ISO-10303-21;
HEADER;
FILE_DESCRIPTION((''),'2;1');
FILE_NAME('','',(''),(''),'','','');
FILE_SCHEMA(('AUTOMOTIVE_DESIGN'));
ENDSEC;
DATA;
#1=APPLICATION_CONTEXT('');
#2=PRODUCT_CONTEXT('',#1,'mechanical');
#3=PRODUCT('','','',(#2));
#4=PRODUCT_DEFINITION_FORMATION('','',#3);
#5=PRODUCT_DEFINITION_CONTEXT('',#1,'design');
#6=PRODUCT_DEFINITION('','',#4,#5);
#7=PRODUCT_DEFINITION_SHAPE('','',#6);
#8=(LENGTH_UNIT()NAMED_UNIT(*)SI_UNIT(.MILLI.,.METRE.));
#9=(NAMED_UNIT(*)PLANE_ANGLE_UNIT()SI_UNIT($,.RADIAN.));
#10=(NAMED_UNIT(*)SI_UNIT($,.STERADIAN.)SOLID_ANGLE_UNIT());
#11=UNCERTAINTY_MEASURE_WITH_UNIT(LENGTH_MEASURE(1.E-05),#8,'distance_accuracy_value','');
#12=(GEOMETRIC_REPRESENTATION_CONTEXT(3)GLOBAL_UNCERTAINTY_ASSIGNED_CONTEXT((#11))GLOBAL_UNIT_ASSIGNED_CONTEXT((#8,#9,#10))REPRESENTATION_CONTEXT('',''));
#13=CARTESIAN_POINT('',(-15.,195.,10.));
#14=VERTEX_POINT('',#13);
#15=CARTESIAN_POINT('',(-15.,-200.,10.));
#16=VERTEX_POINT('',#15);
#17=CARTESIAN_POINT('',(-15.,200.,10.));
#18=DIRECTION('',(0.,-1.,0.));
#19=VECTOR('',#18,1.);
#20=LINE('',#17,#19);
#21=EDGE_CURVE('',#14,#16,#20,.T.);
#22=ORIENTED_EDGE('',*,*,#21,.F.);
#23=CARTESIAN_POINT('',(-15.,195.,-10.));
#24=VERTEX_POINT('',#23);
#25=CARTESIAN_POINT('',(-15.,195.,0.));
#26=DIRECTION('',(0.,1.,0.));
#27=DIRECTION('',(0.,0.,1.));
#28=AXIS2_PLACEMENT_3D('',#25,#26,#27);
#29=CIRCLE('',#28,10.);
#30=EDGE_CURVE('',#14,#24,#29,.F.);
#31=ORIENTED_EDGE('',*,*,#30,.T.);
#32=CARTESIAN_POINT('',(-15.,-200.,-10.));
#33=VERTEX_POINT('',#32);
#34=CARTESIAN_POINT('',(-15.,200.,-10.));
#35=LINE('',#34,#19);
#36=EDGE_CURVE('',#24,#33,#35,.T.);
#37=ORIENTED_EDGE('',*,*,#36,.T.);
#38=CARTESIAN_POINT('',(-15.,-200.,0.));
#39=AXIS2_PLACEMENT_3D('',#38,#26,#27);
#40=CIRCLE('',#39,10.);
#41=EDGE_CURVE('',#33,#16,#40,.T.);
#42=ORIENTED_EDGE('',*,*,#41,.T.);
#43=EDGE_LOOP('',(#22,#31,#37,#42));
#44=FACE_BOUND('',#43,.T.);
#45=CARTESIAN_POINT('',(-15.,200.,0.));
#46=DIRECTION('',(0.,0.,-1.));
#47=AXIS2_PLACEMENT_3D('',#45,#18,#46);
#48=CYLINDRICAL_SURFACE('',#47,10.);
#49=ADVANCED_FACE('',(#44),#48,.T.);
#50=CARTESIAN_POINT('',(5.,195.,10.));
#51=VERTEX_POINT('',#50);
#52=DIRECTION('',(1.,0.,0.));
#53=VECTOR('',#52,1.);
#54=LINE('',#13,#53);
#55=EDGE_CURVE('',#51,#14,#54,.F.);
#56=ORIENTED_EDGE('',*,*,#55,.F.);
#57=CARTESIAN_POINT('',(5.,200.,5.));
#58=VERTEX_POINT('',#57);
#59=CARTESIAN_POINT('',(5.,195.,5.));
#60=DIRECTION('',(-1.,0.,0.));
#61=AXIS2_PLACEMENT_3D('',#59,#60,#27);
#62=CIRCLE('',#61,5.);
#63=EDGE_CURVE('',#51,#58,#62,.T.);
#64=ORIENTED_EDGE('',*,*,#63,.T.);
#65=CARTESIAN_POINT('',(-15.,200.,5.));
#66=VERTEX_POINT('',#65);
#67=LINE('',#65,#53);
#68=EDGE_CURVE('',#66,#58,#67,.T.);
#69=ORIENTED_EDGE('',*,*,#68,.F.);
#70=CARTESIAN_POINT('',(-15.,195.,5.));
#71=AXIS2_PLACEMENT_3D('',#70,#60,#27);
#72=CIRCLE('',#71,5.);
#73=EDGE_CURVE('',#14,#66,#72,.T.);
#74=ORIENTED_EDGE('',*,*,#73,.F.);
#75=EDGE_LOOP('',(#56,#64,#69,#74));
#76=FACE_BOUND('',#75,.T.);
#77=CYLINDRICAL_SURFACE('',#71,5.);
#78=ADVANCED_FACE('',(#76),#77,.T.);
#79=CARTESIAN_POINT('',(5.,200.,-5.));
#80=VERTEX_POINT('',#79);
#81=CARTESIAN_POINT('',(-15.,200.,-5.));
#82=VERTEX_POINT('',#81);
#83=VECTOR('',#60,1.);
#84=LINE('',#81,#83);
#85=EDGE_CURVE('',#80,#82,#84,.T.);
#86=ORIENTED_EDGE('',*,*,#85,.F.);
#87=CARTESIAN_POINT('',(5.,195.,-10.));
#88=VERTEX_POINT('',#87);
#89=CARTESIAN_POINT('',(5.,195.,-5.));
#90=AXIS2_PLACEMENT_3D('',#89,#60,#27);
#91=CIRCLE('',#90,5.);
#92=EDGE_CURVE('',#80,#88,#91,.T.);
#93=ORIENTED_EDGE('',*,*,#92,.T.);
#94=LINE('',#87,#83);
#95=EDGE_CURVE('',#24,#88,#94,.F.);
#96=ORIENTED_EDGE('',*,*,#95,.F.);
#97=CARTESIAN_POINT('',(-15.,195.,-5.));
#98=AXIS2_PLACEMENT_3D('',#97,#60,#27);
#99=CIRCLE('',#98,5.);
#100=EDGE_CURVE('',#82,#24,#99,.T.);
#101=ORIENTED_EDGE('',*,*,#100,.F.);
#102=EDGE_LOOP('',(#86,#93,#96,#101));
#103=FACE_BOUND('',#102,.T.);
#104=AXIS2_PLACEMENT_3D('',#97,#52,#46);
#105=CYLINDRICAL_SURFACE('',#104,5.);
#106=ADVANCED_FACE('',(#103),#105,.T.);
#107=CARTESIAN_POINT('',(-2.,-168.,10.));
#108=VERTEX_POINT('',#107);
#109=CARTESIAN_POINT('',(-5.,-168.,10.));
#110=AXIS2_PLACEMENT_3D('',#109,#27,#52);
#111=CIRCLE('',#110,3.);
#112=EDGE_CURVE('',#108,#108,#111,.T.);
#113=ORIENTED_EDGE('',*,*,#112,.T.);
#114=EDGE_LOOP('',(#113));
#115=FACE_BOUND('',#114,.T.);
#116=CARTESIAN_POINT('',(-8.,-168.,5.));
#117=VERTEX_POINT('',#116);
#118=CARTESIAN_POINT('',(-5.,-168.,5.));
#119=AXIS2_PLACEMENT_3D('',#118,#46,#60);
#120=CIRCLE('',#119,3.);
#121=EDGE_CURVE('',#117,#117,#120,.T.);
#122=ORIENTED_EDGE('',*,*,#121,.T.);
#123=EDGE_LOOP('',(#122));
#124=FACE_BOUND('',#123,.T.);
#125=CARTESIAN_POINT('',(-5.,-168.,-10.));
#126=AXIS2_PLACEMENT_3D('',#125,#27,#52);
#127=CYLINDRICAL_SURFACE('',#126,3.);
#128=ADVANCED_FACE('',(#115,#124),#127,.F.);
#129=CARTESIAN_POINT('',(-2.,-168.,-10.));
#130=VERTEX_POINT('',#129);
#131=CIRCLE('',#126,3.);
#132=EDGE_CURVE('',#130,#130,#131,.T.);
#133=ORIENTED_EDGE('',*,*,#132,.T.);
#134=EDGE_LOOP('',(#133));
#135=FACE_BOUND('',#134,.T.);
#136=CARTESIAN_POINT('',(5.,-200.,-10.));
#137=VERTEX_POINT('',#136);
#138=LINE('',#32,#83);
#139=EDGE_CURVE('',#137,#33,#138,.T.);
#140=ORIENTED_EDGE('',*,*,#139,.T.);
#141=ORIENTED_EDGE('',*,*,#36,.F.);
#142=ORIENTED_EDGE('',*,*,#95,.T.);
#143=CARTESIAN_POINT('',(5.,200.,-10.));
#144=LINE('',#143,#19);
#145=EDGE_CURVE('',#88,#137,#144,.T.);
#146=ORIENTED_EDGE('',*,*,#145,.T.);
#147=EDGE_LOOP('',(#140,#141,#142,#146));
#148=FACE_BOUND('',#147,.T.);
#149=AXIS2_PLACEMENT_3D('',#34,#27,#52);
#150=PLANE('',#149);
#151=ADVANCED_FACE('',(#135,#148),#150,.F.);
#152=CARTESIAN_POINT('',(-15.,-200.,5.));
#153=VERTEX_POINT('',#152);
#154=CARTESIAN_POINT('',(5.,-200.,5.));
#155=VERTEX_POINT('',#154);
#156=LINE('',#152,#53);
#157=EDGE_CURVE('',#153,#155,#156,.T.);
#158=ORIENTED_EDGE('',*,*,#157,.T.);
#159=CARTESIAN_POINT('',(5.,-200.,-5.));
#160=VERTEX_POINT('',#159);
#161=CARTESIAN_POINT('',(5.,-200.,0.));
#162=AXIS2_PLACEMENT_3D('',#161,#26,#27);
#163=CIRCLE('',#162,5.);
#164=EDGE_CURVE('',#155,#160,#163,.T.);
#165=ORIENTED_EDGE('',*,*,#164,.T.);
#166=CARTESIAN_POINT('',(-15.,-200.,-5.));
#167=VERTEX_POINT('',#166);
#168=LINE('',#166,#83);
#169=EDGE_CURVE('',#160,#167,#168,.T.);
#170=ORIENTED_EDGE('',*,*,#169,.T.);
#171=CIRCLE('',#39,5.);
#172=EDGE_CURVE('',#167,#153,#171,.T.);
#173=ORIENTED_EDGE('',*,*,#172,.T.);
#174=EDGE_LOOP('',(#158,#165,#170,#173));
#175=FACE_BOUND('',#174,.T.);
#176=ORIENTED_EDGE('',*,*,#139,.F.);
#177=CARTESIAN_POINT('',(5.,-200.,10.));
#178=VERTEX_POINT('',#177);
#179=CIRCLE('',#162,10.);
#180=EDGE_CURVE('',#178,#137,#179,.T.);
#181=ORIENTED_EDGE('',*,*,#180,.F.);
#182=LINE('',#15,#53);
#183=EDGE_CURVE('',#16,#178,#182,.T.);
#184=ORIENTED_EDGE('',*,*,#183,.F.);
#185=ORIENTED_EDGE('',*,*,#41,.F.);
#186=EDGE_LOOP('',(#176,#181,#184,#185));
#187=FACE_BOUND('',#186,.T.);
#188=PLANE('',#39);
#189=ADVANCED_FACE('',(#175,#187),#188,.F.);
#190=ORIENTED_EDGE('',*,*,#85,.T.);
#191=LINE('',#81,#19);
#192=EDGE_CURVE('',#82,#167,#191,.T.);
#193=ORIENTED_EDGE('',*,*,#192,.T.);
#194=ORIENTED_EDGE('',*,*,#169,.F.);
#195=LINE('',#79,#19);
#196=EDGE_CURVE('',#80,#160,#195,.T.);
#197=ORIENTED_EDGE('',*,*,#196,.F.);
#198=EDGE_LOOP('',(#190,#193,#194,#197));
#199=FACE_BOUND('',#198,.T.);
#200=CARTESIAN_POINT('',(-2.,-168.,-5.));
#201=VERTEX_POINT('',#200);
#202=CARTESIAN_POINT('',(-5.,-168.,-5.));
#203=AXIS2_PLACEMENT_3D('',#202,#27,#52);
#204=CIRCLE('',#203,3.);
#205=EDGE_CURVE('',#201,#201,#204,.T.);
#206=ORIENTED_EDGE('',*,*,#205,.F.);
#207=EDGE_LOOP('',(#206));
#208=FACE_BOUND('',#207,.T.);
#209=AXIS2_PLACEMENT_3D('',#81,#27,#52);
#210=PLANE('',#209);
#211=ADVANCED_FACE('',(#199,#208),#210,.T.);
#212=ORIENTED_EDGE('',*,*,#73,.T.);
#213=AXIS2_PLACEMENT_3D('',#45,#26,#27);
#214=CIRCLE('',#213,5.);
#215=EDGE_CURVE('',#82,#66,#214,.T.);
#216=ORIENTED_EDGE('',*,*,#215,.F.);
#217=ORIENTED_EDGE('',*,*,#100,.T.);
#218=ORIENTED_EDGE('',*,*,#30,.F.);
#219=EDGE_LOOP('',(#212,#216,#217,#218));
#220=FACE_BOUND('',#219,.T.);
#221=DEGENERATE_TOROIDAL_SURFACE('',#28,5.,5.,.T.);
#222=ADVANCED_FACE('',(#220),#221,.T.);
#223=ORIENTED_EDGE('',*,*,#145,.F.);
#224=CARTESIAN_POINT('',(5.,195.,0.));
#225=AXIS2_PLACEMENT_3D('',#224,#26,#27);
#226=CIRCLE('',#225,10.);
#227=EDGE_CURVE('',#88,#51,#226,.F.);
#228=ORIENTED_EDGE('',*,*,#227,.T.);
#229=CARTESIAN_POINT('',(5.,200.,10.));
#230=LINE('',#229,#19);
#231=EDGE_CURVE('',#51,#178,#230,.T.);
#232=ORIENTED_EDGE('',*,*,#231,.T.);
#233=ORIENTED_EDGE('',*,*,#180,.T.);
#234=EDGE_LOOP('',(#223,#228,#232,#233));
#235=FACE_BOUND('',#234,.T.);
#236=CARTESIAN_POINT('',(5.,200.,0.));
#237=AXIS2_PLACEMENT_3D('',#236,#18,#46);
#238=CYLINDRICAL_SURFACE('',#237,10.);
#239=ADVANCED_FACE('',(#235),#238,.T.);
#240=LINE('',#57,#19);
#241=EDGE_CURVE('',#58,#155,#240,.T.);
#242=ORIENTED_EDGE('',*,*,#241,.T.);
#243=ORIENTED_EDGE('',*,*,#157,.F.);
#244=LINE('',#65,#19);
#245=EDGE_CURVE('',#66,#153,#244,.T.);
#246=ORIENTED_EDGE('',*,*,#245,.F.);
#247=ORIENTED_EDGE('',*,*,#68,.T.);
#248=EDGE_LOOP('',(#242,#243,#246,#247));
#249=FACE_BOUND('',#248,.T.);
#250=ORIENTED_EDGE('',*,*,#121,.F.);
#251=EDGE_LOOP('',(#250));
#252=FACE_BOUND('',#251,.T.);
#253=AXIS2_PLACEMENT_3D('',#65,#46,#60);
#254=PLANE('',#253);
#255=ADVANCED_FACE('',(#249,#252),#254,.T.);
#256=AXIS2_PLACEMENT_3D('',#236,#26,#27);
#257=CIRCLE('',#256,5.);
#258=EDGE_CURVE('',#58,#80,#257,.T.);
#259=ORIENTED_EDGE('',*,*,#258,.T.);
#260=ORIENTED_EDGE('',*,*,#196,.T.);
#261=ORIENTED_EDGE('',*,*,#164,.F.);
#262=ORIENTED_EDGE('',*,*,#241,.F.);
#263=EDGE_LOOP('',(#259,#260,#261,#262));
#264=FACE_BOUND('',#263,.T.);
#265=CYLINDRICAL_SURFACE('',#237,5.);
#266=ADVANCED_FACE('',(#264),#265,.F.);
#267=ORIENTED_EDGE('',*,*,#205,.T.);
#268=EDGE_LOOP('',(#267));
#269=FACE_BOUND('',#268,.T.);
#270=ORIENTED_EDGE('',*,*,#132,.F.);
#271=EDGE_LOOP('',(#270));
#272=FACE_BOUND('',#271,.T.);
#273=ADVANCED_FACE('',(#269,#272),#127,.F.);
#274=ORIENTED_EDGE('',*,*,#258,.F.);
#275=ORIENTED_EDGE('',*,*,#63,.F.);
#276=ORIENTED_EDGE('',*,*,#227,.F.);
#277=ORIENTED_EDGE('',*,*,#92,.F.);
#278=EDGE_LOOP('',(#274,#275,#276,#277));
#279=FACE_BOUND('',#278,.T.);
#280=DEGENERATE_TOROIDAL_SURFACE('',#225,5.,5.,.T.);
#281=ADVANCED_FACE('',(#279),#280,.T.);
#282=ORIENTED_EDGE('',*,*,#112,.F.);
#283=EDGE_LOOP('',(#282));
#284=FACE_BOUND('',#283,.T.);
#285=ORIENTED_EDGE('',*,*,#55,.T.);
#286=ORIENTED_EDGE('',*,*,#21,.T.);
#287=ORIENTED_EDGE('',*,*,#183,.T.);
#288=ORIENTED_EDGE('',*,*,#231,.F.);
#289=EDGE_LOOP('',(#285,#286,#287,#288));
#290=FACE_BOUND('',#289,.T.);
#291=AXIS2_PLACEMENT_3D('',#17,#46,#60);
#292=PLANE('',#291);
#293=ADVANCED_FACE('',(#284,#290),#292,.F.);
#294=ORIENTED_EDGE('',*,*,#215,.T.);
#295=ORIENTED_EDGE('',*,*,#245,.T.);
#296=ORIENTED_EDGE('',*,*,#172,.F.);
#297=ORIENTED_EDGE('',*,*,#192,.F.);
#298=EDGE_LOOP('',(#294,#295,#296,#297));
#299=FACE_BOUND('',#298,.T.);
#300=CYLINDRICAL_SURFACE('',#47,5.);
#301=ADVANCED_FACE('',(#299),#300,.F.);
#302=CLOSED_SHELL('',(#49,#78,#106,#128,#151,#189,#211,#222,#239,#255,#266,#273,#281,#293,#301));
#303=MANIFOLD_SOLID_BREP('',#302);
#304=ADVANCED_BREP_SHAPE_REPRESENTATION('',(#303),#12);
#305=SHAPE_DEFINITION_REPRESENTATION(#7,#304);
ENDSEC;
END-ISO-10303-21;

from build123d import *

# Parameters (mm, degrees)
BOSS_EXTRUDE1_DEPTH = 200
SKETCH2_R           = 3
CUT_EXTRUDE1_DEPTH  = 203.546291005
FILLET1_R           = 5


with BuildPart() as part:
    # Sketch1 → Boss-Extrude1 (new, symmetric)
    with BuildSketch(Plane(origin=(0, 0, 0), x_dir=(1, 0, 0), z_dir=(0, 1, 0))):
        with BuildLine():
            Line((-15, 10), (5, 10))
            ThreePointArc((5, 10), (15, 0), (5, -10))
            Line((5, -10), (-15, -10))
            ThreePointArc((-15, -10), (-25, 0), (-15, 10))
        make_face()
        with BuildLine():
            Line((-15, 5), (5, 5))
            ThreePointArc((5, 5), (10, 0), (5, -5))
            Line((5, -5), (-15, -5))
            ThreePointArc((-15, -5), (-20, 0), (-15, 5))
        make_face(mode=Mode.SUBTRACT)
    extrude(amount=BOSS_EXTRUDE1_DEPTH, both=True)

    # Sketch2 → Cut-Extrude1 (cut, through all)
    with BuildSketch(Plane.XY.offset(10)):
        with Locations((-5, -168)):
            Circle(SKETCH2_R)
    extrude(amount=-CUT_EXTRUDE1_DEPTH, mode=Mode.SUBTRACT)

    # Fillet1
    fillet1_edges = [part.edges().sort_by_distance(p)[0] for p in [
        (15, 200, 0),
        (-5, 200, -10),
        (-25, 200, 0),
        (-5, 200, 10),
    ]]
    fillet(fillet1_edges, radius=FILLET1_R - 0.0001)  # a hair under: the kernel refuses the full size


solid = part.part
